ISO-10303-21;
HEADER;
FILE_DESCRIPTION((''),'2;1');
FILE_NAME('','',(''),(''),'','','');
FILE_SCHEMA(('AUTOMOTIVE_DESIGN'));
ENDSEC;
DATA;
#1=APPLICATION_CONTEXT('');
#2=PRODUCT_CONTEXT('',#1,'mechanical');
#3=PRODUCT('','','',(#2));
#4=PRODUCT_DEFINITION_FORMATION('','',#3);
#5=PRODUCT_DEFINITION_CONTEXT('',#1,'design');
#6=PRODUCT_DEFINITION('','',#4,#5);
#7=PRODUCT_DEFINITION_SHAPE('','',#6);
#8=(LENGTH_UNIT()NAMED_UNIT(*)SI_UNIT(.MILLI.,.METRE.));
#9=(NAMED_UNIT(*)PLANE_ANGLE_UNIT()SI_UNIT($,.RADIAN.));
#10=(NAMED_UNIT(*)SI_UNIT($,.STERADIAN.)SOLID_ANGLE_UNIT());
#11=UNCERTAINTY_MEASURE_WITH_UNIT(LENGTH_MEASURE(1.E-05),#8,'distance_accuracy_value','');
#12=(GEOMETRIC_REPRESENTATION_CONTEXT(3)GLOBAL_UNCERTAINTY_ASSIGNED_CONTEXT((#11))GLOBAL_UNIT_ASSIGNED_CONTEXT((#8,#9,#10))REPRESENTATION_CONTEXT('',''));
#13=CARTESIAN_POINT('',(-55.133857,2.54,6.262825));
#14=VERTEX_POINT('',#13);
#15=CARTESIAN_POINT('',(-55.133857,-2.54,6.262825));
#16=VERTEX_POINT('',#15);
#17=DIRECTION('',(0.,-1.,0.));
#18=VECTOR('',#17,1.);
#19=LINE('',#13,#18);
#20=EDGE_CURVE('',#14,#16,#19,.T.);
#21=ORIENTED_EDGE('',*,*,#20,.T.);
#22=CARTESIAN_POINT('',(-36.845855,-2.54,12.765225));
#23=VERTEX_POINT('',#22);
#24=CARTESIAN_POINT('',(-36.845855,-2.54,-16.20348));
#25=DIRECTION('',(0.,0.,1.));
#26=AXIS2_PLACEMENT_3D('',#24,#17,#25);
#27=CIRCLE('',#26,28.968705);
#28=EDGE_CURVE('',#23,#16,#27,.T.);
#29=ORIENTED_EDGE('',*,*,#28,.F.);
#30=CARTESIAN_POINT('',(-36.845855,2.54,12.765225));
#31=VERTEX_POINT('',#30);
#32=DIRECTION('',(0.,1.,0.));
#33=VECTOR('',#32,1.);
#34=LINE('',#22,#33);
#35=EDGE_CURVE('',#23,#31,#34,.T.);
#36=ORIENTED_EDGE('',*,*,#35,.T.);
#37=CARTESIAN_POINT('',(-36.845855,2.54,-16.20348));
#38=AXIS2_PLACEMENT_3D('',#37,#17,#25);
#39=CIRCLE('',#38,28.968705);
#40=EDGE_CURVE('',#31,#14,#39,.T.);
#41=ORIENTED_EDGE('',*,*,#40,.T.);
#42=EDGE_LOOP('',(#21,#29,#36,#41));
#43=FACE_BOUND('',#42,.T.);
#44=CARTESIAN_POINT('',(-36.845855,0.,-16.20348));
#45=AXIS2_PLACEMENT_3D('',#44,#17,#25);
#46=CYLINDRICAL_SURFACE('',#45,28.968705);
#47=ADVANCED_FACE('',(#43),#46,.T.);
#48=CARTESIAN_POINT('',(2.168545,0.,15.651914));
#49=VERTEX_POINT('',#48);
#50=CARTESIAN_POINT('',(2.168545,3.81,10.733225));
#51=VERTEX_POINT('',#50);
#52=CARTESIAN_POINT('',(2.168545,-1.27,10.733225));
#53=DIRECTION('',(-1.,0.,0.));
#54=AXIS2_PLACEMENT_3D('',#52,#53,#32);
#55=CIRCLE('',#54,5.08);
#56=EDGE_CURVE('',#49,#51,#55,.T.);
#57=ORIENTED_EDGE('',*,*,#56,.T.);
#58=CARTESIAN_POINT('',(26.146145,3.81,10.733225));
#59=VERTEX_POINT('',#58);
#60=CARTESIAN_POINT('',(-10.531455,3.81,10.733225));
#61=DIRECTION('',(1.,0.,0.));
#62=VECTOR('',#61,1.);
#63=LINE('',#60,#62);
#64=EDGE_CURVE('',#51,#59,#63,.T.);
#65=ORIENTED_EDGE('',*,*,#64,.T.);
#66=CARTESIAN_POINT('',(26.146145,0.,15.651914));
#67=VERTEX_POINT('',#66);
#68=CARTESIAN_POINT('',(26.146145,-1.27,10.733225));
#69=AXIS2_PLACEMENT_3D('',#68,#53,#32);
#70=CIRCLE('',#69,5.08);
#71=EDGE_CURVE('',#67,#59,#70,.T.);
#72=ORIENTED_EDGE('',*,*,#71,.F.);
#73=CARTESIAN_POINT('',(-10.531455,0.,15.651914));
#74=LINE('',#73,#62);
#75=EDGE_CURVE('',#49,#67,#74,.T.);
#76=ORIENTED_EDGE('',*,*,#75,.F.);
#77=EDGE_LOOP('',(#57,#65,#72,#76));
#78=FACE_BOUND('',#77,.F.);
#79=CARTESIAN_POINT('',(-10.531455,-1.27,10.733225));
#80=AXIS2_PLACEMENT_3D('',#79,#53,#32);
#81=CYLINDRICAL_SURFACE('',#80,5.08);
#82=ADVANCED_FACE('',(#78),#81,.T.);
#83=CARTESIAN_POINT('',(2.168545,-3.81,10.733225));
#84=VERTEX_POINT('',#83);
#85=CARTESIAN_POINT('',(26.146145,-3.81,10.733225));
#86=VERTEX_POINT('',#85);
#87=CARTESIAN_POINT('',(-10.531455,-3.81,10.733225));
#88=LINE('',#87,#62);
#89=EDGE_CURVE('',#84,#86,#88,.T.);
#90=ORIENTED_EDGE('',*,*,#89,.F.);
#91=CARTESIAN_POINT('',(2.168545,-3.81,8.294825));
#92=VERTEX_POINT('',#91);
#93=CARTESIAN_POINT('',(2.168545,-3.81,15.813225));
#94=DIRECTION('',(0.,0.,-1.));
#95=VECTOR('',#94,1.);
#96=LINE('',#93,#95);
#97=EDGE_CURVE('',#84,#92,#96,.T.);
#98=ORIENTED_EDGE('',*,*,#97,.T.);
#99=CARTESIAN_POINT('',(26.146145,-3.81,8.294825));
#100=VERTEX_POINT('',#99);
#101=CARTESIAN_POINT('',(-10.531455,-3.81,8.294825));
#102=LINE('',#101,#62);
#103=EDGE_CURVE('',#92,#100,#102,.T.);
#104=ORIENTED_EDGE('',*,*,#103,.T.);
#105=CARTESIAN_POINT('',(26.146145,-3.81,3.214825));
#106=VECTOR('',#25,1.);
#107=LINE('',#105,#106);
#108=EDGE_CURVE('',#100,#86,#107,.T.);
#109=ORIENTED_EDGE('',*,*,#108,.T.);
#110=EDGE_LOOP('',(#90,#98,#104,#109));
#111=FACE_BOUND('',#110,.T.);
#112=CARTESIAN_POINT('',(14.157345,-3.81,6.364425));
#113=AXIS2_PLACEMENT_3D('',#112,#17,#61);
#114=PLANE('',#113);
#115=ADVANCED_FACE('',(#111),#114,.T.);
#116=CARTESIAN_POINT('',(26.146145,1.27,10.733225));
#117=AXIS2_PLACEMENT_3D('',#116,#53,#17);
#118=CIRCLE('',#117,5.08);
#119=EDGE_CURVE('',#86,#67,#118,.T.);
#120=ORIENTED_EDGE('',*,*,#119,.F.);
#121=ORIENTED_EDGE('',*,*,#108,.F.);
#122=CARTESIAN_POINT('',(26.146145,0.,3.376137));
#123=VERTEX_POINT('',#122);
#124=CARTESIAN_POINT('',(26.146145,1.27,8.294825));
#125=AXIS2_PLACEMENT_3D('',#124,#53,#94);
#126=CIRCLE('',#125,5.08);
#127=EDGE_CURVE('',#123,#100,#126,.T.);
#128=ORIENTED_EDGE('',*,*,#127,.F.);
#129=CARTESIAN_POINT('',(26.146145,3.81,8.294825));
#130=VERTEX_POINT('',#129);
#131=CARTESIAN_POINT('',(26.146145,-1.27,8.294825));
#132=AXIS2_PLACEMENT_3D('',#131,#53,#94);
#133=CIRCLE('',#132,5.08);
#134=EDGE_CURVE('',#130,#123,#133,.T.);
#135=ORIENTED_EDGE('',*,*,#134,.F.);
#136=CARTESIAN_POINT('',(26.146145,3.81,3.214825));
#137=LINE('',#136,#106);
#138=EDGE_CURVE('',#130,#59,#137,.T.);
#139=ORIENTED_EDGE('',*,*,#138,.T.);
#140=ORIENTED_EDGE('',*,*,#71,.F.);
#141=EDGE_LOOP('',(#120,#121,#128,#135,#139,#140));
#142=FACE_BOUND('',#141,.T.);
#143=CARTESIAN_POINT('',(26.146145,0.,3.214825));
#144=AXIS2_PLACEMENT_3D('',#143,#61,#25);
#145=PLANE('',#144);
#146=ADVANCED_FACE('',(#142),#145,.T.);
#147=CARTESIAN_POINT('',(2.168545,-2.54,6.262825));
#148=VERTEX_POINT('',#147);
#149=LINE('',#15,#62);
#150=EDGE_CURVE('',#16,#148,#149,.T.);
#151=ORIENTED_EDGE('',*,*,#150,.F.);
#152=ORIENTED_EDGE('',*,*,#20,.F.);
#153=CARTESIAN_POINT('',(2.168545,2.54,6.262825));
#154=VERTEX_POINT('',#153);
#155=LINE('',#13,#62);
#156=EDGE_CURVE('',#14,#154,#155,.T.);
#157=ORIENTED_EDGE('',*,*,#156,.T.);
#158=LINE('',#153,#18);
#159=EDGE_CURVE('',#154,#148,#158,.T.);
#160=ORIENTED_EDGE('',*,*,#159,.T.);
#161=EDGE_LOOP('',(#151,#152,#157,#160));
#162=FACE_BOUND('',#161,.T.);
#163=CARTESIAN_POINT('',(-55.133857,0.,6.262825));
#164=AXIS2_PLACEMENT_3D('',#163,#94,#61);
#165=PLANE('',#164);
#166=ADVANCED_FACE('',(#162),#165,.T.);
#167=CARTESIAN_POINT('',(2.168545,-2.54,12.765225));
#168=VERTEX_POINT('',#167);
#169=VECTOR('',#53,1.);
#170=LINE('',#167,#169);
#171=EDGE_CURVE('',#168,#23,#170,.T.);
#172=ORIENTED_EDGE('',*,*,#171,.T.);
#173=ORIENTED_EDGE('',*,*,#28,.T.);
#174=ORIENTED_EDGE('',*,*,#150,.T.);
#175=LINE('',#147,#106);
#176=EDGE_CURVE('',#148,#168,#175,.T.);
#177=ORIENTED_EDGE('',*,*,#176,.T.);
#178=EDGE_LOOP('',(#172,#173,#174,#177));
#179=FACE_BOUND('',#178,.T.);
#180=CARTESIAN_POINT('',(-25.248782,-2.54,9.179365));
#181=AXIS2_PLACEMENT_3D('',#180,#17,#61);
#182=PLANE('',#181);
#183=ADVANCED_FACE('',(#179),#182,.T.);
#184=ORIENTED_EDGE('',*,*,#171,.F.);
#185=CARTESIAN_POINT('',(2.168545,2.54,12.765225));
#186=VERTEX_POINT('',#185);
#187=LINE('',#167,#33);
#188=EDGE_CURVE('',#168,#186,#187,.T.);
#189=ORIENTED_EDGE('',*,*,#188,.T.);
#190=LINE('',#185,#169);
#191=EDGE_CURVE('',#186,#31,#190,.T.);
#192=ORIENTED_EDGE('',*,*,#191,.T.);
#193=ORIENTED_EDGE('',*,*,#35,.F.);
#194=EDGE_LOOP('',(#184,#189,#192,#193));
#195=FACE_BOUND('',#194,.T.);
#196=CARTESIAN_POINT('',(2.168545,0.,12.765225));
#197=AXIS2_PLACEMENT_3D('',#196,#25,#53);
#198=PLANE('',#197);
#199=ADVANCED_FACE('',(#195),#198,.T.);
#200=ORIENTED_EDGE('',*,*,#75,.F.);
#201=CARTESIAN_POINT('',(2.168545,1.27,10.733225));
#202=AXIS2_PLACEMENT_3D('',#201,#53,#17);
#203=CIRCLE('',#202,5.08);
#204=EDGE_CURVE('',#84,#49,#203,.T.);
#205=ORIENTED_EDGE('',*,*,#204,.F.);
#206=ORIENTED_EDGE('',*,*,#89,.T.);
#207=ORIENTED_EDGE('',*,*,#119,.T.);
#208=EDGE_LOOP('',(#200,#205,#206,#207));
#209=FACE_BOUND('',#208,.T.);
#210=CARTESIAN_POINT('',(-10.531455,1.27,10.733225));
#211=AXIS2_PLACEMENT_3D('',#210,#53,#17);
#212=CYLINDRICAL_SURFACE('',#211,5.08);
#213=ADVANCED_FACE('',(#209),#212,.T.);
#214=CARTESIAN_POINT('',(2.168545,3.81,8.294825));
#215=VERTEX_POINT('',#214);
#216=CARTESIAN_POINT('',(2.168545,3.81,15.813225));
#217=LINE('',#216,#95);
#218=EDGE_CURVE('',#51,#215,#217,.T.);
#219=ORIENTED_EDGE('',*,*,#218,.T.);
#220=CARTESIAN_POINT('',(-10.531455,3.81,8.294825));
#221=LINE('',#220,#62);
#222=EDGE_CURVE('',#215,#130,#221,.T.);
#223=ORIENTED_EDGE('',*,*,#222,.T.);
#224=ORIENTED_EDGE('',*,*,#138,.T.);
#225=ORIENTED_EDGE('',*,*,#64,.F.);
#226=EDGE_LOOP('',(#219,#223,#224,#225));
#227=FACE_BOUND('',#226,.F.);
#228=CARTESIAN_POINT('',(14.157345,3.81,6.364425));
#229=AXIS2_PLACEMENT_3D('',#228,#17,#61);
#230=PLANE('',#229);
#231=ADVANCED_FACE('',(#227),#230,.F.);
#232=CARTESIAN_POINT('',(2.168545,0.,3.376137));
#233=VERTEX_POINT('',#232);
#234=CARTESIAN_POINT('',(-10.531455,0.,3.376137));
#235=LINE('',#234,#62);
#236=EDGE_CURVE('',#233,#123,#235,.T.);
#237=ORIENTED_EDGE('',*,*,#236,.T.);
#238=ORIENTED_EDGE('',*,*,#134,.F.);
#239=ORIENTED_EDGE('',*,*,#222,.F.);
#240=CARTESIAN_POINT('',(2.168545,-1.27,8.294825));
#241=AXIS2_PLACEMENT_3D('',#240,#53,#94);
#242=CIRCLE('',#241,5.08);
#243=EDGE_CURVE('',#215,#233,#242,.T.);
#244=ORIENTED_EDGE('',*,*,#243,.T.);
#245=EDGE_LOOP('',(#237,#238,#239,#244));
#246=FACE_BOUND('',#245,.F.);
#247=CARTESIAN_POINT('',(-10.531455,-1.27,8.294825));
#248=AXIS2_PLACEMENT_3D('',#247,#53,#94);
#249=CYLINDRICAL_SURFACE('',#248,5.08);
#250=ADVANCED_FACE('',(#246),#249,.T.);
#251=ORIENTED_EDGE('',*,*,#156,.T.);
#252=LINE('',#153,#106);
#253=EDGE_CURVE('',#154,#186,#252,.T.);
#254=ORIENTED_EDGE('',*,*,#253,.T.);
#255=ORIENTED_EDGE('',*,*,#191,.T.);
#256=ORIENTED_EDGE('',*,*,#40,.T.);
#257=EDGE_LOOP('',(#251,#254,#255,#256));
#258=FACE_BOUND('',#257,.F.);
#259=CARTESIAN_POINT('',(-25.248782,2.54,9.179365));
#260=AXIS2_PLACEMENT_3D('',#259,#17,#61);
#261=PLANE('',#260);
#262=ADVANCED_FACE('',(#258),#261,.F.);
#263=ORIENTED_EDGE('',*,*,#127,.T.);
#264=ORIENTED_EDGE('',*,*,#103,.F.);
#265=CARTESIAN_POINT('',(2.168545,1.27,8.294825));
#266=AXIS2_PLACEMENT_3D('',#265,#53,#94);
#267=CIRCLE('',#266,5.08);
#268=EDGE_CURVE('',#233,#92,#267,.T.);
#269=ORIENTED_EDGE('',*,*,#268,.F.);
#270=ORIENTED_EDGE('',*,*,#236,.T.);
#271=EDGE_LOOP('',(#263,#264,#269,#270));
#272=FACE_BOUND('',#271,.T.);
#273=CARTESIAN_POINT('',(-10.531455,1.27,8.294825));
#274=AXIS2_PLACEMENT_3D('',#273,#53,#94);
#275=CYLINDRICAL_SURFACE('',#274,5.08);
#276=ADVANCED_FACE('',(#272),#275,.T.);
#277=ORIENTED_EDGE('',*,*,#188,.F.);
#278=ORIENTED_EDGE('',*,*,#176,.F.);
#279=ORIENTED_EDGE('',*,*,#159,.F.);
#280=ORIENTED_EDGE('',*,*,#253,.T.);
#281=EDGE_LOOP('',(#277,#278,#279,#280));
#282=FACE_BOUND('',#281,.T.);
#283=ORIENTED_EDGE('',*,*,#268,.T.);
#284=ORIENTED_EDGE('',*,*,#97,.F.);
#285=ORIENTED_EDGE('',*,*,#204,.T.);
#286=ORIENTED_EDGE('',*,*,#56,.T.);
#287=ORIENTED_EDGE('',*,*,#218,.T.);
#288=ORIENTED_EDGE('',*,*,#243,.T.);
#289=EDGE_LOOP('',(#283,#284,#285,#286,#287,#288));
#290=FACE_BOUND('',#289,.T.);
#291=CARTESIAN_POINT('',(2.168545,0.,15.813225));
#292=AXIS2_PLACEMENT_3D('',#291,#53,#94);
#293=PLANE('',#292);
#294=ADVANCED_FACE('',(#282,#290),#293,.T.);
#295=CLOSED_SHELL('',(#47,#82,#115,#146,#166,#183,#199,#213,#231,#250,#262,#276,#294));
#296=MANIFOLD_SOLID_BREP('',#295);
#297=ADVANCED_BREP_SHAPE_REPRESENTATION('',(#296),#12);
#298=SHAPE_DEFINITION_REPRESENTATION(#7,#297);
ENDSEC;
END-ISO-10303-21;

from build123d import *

# Parameters (mm, degrees)
F1_DEPTH    = 2.54
F2_DEPTH    = 3.81
F3_T1_DEPTH = 49.3776003865


# Not quite as in the source:
# - a fillet or chamfer that OpenCascade refuses, or shapes differently, is made with other operations: its cross-section is extruded or revolved along the edge and cut away or added


with BuildPart() as f1:
    # F0 (on Front) → F1 (new body, symmetric)
    with BuildSketch(Plane.XZ):
        with BuildLine():
            ThreePointArc((-36.8458546815, 12.765225481), (-46.5506501675, 11.0912601627), (-55.133856614, 6.2628253844))
            Line((-55.133856614, 6.2628253844), (2.168544932, 6.2628253844))
            Line((2.168544932, 6.2628253844), (2.168544932, 9.5140254327))
            Line((2.168544932, 9.5140254327), (2.168544932, 12.765225481))
            Line((2.168544932, 12.765225481), (-36.8458546815, 12.765225481))
        make_face()
    extrude(amount=F1_DEPTH, both=True)

    # F0 (on Front) → F2 (join, symmetric)
    with BuildSketch(Plane.XZ):
        Polygon((2.168544932, 9.5140254327), (2.168544932, 6.2628253844), (2.168544932, 3.2148253844), (26.1461453185, 3.2148253844), (26.1461453185, 9.5140254327), align=None)
        Polygon((2.168544932, 12.765225481), (2.168544932, 9.5140254327), (26.1461453185, 9.5140254327), (26.1461453185, 15.813225481), (2.168544932, 15.813225481), align=None)
    extrude(amount=F2_DEPTH, both=True)

    # F3: fillet of radius 5.08 on 4 edges, made by hand

    # F3_s2 → F3_t1 (cut)
    with BuildSketch(Plane.YZ.offset(-10.531455068)):
        with BuildLine():
            ThreePointArc((-3.81, 10.733225481), (-2.3221024484, 14.3253279294), (1.27, 15.813225481))
            Line((1.27, 15.813225481), (-3.81, 15.813225481))
            Line((-3.81, 15.813225481), (-3.81, 10.733225481))
        make_face()
        with BuildLine():
            ThreePointArc((1.27, 3.2148253844), (-2.3221024484, 4.7027229359), (-3.81, 8.2948253844))
            Line((-3.81, 8.2948253844), (-3.81, 3.2148253844))
            Line((-3.81, 3.2148253844), (1.27, 3.2148253844))
        make_face()
        with BuildLine():
            ThreePointArc((3.81, 10.733225481), (2.3221024484, 14.3253279294), (-1.27, 15.813225481))
            Line((-1.27, 15.813225481), (3.81, 15.813225481))
            Line((3.81, 15.813225481), (3.81, 10.733225481))
        make_face()
        with BuildLine():
            ThreePointArc((-1.27, 3.2148253844), (2.3221024484, 4.7027229359), (3.81, 8.2948253844))
            Line((3.81, 8.2948253844), (3.81, 3.2148253844))
            Line((3.81, 3.2148253844), (-1.27, 3.2148253844))
        make_face()
    extrude(amount=F3_T1_DEPTH, mode=Mode.SUBTRACT)


solid = f1.part
